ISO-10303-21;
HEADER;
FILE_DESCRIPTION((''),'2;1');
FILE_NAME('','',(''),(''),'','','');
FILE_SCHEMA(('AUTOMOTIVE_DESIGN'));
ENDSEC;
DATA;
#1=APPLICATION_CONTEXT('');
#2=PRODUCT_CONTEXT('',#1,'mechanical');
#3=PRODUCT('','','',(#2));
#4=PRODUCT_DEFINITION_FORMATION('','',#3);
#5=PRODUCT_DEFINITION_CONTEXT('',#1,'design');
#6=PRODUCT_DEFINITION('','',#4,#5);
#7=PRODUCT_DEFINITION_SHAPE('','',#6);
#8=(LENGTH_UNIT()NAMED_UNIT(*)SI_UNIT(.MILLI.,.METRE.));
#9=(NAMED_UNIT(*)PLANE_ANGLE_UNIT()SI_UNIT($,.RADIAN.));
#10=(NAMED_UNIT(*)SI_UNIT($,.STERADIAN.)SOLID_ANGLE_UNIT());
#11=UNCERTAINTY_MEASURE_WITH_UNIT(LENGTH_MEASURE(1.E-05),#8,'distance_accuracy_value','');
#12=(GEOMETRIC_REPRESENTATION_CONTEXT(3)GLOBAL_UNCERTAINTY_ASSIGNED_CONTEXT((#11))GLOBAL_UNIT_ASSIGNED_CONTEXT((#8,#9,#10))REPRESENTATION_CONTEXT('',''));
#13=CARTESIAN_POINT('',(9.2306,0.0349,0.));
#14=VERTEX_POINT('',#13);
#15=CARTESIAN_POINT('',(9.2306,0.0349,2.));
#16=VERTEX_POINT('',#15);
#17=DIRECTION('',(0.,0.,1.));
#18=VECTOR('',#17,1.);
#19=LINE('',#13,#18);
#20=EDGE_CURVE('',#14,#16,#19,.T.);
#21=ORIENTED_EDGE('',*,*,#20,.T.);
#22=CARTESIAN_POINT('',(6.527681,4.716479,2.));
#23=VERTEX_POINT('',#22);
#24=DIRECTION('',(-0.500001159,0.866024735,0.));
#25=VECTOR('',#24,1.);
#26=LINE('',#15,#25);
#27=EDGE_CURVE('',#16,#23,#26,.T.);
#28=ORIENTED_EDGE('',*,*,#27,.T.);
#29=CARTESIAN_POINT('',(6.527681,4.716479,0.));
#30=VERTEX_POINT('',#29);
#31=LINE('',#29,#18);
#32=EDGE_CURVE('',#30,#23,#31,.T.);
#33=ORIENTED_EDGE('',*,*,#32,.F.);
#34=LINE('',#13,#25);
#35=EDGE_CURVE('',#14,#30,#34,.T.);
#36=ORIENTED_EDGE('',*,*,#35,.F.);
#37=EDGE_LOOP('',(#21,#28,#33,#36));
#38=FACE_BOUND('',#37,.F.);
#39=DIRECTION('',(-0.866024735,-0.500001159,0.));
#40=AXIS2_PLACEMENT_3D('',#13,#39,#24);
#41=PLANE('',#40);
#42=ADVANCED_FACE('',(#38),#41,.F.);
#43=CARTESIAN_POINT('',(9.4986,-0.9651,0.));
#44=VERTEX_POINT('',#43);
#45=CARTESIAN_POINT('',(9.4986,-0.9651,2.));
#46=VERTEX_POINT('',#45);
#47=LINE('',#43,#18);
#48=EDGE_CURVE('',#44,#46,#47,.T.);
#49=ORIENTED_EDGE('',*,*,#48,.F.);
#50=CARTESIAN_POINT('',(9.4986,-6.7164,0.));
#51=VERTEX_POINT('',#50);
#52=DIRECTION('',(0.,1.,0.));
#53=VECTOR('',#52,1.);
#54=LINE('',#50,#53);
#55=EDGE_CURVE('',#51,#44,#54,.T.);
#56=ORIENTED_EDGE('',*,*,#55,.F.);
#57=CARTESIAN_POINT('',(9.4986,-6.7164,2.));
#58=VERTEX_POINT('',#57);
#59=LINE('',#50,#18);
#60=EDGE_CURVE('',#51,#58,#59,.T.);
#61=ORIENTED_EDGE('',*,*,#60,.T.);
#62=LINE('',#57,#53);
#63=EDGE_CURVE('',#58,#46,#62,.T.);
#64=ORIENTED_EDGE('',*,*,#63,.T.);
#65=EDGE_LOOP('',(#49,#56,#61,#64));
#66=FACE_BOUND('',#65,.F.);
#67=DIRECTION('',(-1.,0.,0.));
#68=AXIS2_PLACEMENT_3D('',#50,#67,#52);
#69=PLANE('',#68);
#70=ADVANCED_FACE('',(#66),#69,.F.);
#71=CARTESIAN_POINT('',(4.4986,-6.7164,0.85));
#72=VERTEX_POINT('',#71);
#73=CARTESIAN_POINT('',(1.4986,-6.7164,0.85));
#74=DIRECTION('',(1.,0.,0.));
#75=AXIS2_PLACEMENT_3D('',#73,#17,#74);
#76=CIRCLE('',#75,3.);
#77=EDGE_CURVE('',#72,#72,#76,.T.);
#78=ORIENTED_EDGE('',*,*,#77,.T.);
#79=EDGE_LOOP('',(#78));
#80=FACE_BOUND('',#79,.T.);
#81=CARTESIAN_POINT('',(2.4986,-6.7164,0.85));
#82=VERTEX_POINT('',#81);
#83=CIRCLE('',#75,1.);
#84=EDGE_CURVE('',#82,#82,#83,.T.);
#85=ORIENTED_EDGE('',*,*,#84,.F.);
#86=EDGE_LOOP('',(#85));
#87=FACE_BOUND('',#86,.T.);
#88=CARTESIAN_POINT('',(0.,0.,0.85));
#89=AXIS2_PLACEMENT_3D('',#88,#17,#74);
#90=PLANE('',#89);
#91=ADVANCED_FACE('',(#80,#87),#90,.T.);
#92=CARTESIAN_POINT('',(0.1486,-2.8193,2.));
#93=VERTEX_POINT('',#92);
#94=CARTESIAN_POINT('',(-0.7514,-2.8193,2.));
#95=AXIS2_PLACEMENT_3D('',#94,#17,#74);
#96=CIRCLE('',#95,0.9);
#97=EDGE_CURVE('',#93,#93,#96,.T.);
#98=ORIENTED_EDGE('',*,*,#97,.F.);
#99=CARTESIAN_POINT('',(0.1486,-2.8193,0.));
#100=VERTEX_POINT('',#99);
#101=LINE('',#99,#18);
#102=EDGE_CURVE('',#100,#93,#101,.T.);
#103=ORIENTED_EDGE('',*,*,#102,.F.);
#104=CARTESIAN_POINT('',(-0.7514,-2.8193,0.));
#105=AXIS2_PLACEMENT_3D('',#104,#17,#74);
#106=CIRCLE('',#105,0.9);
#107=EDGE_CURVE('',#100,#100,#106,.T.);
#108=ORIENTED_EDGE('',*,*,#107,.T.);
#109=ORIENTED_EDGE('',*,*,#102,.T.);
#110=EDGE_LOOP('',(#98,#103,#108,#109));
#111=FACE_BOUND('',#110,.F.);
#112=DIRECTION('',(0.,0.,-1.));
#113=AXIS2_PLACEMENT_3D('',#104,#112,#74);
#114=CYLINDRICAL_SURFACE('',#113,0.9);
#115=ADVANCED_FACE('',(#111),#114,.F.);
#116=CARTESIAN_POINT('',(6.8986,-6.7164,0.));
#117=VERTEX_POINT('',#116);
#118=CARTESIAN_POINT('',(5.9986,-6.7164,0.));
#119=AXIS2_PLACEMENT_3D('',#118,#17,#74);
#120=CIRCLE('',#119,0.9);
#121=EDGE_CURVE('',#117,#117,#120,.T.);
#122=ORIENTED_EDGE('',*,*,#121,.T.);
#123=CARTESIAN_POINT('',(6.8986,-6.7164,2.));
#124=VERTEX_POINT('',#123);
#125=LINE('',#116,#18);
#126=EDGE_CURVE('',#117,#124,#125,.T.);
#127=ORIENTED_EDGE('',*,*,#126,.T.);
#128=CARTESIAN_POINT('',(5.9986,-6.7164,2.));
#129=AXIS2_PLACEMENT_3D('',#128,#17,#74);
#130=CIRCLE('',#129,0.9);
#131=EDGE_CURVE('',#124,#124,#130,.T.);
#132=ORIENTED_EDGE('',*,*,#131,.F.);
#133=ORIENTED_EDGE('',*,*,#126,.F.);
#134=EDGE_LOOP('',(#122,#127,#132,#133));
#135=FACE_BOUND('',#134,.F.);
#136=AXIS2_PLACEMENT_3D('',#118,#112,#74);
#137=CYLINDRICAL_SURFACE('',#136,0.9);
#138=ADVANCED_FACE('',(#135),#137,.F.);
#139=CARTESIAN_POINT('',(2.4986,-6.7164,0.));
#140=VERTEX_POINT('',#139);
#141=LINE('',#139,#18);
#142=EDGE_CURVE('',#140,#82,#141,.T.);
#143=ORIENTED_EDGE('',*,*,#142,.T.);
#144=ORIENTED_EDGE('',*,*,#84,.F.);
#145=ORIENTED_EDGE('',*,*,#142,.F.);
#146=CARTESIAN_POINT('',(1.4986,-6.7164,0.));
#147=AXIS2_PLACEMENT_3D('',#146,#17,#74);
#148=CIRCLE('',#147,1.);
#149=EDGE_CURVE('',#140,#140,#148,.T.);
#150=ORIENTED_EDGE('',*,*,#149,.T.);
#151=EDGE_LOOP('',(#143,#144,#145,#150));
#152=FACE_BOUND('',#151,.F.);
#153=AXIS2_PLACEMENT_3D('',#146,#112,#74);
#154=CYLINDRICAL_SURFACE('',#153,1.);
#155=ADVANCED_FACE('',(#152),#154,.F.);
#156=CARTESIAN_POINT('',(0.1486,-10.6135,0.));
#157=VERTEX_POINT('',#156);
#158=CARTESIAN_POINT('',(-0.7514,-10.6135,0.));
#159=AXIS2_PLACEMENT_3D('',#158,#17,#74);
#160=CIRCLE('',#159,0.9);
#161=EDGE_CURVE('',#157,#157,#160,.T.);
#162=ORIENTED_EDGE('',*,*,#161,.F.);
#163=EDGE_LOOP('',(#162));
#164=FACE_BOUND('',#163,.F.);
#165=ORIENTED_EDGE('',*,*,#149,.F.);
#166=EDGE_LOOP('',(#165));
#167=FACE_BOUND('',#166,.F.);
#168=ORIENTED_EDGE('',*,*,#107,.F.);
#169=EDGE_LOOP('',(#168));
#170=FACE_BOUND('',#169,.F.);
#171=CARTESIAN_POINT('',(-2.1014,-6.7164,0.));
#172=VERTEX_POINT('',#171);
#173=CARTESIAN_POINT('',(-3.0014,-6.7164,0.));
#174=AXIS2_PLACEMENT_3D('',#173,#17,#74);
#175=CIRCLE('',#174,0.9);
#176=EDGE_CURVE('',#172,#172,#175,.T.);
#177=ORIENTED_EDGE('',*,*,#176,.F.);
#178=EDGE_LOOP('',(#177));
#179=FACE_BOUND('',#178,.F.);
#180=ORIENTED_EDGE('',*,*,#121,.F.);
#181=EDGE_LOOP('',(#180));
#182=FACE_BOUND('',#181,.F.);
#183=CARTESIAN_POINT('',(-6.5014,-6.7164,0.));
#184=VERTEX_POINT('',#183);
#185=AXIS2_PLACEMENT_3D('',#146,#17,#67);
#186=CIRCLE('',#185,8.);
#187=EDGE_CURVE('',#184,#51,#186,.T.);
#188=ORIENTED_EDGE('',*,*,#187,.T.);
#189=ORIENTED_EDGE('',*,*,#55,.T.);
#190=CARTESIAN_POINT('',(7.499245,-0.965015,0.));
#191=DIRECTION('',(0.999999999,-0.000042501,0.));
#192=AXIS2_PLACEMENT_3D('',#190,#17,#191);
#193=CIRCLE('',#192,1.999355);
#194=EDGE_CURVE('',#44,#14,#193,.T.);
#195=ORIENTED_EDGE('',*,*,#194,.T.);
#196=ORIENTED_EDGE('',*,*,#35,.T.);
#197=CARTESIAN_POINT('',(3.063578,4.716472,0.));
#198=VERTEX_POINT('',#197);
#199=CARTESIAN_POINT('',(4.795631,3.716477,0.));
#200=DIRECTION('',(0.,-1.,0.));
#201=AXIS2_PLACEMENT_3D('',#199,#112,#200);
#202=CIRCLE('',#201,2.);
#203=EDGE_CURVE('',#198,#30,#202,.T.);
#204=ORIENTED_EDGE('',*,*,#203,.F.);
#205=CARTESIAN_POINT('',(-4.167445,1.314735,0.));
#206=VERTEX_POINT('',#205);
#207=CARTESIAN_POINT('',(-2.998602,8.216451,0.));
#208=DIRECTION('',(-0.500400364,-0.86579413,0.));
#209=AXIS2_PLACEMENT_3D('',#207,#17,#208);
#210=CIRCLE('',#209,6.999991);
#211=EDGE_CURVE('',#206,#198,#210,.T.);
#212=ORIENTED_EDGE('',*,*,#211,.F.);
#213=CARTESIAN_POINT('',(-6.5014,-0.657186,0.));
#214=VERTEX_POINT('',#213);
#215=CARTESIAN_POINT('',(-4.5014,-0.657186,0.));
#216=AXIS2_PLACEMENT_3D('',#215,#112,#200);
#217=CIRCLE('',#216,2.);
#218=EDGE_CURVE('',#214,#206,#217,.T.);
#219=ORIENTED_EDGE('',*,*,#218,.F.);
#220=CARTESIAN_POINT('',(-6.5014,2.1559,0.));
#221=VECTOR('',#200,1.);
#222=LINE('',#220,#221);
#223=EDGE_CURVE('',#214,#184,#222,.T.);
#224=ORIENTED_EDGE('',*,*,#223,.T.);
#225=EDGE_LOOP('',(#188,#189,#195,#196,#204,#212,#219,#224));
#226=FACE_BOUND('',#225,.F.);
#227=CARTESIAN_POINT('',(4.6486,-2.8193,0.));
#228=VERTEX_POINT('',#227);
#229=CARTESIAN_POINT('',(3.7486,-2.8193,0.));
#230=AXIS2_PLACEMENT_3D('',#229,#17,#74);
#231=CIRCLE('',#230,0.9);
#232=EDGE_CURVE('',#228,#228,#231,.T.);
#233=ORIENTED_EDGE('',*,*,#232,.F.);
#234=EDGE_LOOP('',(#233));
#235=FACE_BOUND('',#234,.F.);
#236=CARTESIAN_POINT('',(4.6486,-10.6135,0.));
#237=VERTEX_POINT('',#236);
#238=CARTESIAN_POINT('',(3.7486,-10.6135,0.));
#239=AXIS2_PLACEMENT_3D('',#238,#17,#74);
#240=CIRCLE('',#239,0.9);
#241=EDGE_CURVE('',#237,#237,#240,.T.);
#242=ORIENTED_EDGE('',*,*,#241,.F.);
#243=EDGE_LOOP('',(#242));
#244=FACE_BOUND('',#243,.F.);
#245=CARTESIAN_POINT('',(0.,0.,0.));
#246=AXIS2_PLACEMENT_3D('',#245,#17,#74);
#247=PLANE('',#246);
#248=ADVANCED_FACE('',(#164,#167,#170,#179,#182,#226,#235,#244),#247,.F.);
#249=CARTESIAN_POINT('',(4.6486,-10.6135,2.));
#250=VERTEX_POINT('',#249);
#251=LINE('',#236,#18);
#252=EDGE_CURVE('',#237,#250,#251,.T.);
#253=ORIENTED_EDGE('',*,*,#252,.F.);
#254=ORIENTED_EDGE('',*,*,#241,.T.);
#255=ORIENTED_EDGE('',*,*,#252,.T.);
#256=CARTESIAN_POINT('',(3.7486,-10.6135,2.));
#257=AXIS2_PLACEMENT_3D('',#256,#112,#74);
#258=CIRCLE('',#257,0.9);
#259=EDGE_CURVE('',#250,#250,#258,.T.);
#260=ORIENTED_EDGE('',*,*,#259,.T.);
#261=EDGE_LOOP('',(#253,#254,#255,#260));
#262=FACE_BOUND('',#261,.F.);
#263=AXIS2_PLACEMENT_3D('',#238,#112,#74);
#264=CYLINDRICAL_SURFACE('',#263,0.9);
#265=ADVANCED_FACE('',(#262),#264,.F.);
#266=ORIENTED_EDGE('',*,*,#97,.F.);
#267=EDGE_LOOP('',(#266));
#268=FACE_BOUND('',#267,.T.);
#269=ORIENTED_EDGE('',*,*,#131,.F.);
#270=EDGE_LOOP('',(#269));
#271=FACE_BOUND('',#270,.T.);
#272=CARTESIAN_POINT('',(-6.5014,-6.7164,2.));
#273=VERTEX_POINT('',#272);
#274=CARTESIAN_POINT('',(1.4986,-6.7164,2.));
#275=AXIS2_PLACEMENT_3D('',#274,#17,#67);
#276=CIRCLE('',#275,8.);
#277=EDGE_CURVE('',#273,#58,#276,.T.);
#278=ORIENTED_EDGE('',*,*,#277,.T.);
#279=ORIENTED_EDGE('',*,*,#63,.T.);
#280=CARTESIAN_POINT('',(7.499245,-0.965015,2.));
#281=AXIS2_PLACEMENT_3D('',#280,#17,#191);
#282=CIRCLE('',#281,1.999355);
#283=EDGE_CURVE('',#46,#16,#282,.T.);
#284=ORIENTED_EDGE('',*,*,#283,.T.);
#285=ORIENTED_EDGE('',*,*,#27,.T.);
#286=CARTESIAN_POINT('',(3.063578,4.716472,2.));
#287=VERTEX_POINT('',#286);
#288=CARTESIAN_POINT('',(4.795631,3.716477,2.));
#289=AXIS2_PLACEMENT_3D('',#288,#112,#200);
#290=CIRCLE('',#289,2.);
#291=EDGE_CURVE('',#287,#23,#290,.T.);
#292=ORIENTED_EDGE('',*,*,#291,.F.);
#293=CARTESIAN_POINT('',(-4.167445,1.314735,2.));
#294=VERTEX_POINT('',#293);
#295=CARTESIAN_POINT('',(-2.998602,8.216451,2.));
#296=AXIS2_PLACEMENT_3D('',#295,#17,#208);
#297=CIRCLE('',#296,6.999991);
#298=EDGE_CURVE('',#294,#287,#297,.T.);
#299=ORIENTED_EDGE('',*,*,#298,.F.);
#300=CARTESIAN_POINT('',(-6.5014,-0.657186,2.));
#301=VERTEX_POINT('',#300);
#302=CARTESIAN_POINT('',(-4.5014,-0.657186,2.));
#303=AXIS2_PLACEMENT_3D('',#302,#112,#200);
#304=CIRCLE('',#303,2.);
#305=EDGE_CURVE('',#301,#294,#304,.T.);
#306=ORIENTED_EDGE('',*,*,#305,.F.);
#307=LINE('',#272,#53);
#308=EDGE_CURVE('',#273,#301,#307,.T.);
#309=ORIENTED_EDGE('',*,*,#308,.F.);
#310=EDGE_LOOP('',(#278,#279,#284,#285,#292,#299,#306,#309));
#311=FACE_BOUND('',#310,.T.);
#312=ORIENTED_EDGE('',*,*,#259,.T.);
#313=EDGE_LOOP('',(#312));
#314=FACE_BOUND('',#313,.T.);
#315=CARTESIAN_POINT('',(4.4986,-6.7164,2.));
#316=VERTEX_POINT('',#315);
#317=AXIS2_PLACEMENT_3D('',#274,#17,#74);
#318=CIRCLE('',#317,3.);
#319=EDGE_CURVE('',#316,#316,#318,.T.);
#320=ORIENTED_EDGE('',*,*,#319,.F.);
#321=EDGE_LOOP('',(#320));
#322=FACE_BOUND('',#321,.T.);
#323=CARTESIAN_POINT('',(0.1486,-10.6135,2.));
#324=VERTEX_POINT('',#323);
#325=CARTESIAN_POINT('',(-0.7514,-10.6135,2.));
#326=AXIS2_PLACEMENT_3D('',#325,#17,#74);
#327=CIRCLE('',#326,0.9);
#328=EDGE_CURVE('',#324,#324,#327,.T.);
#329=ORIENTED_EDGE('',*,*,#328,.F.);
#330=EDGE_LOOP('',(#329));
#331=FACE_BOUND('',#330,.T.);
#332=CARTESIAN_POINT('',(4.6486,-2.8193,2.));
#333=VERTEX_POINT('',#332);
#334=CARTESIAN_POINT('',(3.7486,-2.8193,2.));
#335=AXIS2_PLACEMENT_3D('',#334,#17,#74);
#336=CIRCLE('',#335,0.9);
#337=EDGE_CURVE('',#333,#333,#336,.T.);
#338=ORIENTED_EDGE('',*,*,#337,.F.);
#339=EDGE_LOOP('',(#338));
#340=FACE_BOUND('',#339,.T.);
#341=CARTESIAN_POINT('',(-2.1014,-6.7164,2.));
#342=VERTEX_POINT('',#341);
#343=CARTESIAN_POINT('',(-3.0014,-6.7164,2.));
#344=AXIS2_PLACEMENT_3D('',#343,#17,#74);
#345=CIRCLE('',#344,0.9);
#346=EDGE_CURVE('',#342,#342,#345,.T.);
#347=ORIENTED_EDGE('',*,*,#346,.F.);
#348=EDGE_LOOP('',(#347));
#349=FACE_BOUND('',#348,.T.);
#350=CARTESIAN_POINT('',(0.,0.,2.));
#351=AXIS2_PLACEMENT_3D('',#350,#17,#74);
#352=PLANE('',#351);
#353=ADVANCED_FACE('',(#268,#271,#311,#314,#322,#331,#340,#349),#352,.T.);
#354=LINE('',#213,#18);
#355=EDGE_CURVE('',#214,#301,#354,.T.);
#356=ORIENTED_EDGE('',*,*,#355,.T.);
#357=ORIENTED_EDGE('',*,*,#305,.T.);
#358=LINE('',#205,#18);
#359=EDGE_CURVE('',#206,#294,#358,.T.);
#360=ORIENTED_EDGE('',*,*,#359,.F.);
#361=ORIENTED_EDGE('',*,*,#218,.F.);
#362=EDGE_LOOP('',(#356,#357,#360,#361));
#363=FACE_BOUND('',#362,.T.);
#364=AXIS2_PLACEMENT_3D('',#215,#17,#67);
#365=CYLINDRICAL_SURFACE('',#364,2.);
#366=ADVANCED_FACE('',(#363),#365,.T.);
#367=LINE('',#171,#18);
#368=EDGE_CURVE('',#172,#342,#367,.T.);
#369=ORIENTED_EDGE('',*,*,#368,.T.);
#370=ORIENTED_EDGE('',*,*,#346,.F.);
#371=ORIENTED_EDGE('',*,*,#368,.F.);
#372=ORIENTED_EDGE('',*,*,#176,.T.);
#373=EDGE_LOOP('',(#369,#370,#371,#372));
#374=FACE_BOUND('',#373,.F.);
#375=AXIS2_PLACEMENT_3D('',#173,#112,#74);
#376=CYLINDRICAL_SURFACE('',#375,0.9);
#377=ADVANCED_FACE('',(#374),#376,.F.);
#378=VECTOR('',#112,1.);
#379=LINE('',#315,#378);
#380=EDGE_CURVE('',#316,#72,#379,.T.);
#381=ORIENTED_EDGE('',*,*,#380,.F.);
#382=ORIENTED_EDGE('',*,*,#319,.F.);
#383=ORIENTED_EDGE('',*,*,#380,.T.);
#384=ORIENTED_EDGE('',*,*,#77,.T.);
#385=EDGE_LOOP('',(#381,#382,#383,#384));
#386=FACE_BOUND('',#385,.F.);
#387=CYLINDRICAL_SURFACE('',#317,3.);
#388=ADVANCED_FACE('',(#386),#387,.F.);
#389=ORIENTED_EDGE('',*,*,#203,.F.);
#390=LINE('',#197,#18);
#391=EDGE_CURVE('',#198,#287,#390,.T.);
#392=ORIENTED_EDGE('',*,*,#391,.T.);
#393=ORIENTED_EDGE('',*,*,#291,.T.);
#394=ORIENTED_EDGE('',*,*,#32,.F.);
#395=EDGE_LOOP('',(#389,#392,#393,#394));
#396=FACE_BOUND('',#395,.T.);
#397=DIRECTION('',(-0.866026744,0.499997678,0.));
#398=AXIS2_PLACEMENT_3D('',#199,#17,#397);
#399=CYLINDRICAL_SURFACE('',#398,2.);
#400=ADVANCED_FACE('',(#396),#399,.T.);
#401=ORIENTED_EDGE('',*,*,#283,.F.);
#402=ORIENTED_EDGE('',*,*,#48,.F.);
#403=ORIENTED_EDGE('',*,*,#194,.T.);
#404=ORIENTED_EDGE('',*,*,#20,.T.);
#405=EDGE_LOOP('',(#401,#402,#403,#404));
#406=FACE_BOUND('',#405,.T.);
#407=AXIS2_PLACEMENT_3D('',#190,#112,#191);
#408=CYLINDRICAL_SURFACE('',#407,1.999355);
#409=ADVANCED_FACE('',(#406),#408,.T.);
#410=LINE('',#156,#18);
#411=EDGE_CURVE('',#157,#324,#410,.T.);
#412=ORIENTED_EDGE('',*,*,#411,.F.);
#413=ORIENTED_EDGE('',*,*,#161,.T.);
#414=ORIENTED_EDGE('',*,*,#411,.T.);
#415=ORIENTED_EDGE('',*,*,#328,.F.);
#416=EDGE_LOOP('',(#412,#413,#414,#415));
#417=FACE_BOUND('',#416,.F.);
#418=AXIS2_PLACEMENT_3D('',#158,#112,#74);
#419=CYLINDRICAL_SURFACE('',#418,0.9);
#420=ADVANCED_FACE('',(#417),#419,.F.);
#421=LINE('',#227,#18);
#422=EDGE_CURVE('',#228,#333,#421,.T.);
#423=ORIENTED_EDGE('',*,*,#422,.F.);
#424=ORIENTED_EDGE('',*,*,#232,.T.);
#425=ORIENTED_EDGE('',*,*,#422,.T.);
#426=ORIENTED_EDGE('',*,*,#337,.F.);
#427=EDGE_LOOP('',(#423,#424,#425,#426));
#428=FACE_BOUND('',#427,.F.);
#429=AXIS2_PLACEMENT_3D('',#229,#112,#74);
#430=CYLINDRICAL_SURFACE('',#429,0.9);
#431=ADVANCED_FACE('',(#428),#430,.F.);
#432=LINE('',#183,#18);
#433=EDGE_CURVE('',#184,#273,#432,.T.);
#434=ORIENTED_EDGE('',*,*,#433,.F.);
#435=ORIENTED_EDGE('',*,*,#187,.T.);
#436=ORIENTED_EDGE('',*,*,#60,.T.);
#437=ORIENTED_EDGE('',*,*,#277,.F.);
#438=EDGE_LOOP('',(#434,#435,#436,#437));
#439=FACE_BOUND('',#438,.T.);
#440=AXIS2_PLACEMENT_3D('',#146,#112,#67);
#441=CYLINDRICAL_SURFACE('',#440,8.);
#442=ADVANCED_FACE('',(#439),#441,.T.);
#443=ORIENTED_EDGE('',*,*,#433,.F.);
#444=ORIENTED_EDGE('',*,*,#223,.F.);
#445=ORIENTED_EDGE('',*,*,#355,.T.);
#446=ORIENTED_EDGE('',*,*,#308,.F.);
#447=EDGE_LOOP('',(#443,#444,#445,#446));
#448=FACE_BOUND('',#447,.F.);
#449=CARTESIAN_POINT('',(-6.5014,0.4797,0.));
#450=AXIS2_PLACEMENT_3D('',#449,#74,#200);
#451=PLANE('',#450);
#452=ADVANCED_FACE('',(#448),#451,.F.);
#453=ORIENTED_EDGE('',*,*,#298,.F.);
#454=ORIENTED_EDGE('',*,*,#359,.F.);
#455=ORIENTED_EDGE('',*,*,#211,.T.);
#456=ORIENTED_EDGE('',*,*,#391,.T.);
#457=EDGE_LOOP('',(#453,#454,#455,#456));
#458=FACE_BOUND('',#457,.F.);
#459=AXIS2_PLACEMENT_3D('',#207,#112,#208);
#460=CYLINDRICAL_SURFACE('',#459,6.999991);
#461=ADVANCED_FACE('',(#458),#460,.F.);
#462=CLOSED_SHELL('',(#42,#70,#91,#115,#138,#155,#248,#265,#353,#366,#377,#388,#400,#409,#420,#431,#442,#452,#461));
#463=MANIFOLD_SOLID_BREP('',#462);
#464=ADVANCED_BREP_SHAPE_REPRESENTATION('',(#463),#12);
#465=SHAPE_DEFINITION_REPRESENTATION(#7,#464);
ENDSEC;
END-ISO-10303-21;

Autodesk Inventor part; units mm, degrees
ref_plane "YZ Plane" through (0, 0, 0) normal (1, 0, 0) x (0, 1, 0)
ref_plane "XZ Plane" through (0, 0, 0) normal (0, 1, 0) x (-1, 0, 0)
ref_plane "XY Plane" through (0, 0, 0) normal (0, 0, 1) x (1, 0, 0)
ref_plane "作業平面1" through (0, 0, 0) normal (0, 0, 1) x (1, 0, 0)
sketch "スケッチ1" plane through (0, 0, 0) normal (0, 0, 1) x (1, 0, 0)
  arc A0 (-6.5014, -6.7164) -> (9.4986, -6.7164) centre (1.4986, -6.7164) ccw projected
  line L0 (9.4986, -6.7164) -> (9.4986, -0.9651) projected
  arc A1 (9.4986, -0.9651) -> (9.2306, 0.0349) centre (7.4986, -0.9651) ccw projected
  line L1 (9.2306, 0.0349) -> (2.6306, 11.4664) projected
  arc A2 (2.6306, 11.4664) -> (-8.6277, 4.9664) centre (-2.9986, 8.2164) ccw projected
  line L2 (-8.6277, 4.9664) -> (-6.9034, 1.9797) projected
  arc A3 (-6.5014, 0.4797) -> (-6.9034, 1.9797) centre (-9.5014, 0.4797) ccw projected
  line L3 (-6.5014, 0.4797) -> (-6.5014, -6.7164) projected
  circle A4 centre (-2.9986, 8.2164) radius 3 projected
  circle A5 centre (1.4986, -6.7164) radius 1 projected
  circle A6 centre (5.9986, -6.7164) radius 0.9
  line L4 (5.9986, -6.7164) -> (1.4986, -6.7164) construction
  circle A7 centre (3.7486, -2.8193) radius 0.9
  circle A8 centre (-0.7514, -2.8193) radius 0.9
  circle A9 centre (-3.0014, -6.7164) radius 0.9
  circle A10 centre (-0.7514, -10.6135) radius 0.9
  circle A11 centre (3.7486, -10.6135) radius 0.9
  circle A12 centre (1.4986, -6.7164) radius 3
  arc A13 (-6.5014, 2.1559) -> (3.9296, 9.2164) centre (-2.9986, 8.2164) ccw
  circle A14 centre (1.4986, -6.7164) radius 1
  line L5 (-6.5014, 2.1559) -> (-6.5014, 0.4797)
  circle A15 centre (3.9986, -11.0465) radius 1.25 projected
  point P0 (0, 0)
  dimension "d0" = 4.5
  dimension "d1" = 1.8
  dimension "d4" = 360
  dimension "d6" = 6
  dimension "d7" = 7
  dimension "d10" = 2
extrude "押し出し1" add sketch "スケッチ1" along normal blind 2 contours L3 L5 A13 L1 A1 L0 A0 | A11 A15 | A12 picked at (4.4817, -11.8763)
sketch "スケッチ2" plane through (0, 0, 2) normal (0, 0, 1) x (1, 0, 0)
  line L0 (9.2306, 0.0349) -> (3.9296, 9.2164) projected
  line L1 (-6.5014, 2.1559) -> (-6.5014, -6.7164) projected
  arc A0 (-6.5014, -6.7164) -> (9.4986, -6.7164) centre (1.4986, -6.7164) ccw projected
  line L2 (9.4986, -6.7164) -> (9.4986, -0.9651) projected
  arc A1 (9.4986, -0.9651) -> (9.2306, 0.0349) centre (7.4986, -0.9651) ccw projected
  circle A2 centre (3.7486, -10.6135) radius 0.9 projected
  circle A3 centre (-0.7514, -10.6135) radius 0.9 projected
  circle A4 centre (-3.0014, -6.7164) radius 0.9 projected
  circle A5 centre (-0.7514, -2.8193) radius 0.9 projected
  circle A6 centre (3.7486, -2.8193) radius 0.9 projected
  circle A7 centre (5.9986, -6.7164) radius 0.9 projected
  circle A8 centre (1.4986, -6.7164) radius 1 projected
  circle A9 centre (1.4986, -6.7164) radius 3
  arc A10 (-6.5014, 2.1559) -> (3.9296, 9.2164) centre (-2.9986, 8.2164) ccw projected
  point P0 (0, 0)
  dimension "d11" = 6
extrude "押し出し2" cut sketch "スケッチ2" against normal blind 1.15 contours A9
fillet "フィレット1" radius 2 2 edges at (3.9296, 9.2164, 1) (-6.5014, 2.1559, 1)
properties part number "Motor_Mount"
